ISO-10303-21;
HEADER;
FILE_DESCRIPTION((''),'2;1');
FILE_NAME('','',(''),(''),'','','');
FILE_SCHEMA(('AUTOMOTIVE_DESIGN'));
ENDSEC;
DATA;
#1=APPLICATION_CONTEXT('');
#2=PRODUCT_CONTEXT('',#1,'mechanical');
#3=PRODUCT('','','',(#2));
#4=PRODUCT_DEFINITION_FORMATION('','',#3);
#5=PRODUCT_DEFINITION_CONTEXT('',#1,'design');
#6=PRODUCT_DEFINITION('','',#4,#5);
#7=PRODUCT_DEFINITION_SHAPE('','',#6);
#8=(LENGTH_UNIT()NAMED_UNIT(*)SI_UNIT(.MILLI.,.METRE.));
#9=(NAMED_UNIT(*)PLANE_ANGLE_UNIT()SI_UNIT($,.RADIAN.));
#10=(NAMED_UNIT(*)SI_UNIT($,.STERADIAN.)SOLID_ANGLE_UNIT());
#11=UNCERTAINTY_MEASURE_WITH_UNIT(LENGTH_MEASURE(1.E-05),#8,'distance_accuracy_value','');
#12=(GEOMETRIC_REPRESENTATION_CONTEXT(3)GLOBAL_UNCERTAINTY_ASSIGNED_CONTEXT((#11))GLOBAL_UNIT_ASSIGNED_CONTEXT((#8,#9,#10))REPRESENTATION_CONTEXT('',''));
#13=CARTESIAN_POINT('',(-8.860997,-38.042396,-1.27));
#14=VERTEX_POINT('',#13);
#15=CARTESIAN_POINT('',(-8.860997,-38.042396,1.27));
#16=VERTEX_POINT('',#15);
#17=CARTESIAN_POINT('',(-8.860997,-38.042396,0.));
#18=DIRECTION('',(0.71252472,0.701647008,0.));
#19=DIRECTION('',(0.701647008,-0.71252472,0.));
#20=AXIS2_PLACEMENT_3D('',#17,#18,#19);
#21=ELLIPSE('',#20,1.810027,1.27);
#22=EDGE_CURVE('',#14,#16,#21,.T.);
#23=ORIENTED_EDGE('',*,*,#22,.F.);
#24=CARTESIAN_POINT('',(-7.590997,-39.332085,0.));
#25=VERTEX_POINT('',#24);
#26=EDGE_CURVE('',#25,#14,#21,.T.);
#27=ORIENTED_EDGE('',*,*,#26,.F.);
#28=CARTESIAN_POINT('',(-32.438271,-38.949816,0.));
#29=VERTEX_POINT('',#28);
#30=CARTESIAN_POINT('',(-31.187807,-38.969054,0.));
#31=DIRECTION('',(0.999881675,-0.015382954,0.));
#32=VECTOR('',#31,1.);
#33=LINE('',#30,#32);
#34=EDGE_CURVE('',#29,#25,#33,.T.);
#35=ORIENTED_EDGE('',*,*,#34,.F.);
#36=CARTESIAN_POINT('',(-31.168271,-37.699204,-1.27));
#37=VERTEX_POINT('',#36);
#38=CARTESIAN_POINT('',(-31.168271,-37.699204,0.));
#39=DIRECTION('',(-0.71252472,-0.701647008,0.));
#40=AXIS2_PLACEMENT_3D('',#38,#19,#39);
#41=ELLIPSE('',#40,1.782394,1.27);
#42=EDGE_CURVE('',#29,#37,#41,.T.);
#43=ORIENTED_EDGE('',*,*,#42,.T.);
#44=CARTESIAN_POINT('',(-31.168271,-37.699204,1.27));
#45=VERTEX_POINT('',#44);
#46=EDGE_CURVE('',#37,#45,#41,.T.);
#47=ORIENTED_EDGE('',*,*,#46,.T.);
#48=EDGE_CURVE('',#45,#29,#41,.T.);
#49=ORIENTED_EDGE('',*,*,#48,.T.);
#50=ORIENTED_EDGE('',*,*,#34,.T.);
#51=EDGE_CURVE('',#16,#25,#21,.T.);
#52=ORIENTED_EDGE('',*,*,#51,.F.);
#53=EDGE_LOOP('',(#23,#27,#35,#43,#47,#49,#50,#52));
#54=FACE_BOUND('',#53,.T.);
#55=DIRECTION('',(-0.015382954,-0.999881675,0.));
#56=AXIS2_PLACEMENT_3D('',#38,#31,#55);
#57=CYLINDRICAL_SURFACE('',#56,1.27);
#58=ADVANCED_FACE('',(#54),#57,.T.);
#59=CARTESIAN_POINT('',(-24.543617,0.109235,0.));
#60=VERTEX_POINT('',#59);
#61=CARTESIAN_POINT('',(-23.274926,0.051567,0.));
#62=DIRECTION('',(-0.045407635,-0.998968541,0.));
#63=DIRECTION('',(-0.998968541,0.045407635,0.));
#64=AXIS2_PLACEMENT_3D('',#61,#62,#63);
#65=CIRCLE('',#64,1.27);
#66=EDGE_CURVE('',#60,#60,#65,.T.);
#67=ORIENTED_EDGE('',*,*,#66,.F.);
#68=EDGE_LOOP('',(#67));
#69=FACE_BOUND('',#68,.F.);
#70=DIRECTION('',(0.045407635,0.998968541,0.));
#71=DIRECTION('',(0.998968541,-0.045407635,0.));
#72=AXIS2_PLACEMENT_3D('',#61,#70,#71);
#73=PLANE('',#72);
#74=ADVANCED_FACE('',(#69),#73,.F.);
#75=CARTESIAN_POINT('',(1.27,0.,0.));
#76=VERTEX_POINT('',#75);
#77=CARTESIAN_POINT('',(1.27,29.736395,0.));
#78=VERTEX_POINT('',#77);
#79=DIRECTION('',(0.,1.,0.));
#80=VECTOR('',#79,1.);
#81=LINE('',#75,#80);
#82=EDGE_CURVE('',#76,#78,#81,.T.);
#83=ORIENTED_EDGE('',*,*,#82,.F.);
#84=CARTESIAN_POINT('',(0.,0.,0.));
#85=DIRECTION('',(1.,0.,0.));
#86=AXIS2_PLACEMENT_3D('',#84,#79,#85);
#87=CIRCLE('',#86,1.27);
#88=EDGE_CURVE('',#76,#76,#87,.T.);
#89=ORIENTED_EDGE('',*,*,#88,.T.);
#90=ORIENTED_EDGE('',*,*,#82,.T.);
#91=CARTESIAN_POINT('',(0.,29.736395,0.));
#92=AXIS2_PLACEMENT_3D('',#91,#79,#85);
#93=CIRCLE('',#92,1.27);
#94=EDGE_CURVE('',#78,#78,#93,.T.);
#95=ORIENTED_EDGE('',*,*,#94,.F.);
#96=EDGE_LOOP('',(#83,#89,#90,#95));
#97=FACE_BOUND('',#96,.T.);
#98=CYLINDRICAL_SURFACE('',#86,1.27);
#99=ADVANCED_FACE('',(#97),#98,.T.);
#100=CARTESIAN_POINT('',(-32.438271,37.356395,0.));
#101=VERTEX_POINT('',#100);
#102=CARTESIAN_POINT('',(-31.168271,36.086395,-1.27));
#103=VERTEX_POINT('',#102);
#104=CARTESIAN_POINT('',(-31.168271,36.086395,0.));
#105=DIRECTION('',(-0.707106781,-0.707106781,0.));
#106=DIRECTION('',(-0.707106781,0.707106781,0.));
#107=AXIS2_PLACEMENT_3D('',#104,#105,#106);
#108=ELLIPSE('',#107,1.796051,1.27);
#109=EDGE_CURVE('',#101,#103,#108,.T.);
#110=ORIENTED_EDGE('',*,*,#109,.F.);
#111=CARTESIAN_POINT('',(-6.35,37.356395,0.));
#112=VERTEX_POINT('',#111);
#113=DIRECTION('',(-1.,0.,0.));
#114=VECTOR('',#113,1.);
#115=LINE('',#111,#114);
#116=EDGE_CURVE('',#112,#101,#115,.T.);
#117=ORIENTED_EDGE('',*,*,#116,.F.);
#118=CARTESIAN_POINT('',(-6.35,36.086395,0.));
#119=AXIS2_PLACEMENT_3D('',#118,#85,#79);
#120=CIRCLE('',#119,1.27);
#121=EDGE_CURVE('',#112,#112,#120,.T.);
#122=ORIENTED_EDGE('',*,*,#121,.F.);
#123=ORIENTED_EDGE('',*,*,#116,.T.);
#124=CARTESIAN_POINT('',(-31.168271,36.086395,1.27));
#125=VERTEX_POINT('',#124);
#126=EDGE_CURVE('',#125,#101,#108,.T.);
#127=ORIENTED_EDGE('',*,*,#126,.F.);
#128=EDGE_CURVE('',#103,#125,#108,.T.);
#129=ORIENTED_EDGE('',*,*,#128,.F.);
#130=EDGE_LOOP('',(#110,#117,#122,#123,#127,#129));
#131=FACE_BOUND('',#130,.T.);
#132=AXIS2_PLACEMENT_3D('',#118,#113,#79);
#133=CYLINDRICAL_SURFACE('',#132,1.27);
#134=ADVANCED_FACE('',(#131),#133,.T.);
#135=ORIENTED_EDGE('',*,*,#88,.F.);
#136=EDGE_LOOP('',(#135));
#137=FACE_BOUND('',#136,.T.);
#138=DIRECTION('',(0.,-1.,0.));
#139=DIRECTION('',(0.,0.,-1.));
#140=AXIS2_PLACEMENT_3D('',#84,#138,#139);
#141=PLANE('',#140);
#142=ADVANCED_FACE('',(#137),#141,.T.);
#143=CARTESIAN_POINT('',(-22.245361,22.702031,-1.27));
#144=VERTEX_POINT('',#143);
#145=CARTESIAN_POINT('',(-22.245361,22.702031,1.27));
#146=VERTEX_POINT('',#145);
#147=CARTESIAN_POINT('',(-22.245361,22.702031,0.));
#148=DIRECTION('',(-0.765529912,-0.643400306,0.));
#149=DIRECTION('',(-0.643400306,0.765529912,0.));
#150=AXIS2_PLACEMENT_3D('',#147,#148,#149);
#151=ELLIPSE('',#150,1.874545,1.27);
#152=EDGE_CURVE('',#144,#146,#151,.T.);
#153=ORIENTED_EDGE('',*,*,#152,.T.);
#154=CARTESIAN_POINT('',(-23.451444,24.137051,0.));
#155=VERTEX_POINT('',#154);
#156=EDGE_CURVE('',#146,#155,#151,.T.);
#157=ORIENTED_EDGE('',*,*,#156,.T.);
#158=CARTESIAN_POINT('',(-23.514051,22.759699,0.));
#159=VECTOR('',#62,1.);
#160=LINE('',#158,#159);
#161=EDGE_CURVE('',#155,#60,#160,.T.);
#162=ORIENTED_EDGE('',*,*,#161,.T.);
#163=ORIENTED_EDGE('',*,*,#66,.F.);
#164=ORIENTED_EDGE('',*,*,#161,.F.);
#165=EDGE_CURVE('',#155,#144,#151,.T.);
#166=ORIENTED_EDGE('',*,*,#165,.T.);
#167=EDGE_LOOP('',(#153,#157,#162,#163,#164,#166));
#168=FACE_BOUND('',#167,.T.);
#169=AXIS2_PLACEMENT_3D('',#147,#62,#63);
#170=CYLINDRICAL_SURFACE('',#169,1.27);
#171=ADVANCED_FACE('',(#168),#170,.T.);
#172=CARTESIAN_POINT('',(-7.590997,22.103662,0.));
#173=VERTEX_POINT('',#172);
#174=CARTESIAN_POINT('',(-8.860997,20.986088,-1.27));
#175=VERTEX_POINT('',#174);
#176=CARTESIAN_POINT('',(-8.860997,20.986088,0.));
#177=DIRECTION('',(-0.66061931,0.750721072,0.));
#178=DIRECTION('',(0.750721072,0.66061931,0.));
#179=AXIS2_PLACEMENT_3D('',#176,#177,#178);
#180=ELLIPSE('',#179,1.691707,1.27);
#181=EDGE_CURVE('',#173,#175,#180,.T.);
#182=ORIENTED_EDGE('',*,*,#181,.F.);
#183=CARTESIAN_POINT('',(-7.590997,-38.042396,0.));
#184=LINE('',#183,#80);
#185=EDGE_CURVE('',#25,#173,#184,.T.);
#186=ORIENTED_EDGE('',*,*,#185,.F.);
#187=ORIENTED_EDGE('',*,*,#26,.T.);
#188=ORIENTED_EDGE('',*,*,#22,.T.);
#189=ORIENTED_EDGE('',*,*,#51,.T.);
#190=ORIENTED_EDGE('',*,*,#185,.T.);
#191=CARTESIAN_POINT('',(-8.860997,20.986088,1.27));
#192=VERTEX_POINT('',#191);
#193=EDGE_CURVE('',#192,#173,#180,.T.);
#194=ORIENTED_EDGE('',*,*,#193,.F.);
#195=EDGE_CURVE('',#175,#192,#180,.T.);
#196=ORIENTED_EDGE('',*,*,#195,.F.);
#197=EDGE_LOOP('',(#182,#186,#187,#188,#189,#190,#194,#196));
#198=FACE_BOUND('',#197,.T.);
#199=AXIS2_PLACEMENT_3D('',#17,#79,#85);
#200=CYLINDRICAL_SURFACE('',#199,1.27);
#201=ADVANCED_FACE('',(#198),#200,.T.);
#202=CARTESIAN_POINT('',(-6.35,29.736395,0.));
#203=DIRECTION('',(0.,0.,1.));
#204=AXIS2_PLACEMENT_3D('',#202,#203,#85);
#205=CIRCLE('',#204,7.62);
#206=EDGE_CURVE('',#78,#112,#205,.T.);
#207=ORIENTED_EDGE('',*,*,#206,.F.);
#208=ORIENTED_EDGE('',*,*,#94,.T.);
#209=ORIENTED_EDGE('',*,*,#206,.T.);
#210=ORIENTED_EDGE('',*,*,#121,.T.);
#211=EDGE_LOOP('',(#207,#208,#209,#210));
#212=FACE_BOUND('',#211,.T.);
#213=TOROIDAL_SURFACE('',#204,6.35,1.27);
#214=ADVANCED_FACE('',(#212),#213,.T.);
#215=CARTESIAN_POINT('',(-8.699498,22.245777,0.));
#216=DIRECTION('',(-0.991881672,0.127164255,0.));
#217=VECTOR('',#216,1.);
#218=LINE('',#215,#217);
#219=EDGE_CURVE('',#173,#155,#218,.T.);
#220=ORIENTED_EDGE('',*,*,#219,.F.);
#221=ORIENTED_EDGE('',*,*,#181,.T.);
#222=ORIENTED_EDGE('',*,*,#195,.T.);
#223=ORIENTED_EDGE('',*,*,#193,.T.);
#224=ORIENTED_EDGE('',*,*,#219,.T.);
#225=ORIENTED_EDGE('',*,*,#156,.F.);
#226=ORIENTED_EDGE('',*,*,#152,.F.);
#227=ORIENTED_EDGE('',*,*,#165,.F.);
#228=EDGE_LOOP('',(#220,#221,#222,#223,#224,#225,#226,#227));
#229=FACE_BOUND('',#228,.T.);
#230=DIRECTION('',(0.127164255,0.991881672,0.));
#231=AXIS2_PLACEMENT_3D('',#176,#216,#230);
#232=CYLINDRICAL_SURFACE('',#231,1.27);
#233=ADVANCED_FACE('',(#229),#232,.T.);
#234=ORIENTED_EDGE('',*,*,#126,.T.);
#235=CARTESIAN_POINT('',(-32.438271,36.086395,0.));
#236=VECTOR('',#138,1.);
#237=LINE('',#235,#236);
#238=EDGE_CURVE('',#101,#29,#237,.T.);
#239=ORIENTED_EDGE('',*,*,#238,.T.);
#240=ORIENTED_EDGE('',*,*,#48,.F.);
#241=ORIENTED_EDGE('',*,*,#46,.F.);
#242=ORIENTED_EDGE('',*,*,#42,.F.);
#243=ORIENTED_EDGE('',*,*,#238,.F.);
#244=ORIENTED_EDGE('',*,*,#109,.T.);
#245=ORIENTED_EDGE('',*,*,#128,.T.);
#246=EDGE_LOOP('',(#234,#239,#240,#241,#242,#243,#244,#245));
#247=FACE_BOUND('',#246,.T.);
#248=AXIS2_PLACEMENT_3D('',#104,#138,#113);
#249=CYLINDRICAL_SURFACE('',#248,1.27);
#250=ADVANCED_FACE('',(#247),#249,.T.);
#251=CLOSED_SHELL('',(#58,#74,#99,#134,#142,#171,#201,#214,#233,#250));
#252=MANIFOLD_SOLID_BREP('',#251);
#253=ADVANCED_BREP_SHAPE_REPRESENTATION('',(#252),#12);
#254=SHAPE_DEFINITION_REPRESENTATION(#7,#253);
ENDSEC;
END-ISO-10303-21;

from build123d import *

# Parameters (mm, degrees)
F0_R = 1.27


with BuildPart() as f2:
    # F2: sweep along a path in F1
    with BuildLine(Plane.XY) as f2_path:
        Line((0, 0), (0, 29.7363953829))
        ThreePointArc((0, 29.7363953829), (-1.8598719395, 34.2265234434), (-6.35, 36.0863953829))
        Line((-6.35, 36.0863953829), (-31.1682708561, 36.0863953829))
        Line((-31.1682708561, 36.0863953829), (-31.1682708561, -37.6992039382))
        Line((-31.1682708561, -37.6992039382), (-8.8609969243, -38.042396307))
        Line((-8.8609969243, -38.042396307), (-8.8609969243, 20.9860876203))
        Line((-8.8609969243, 20.9860876203), (-22.2453605384, 22.7020308375))
        Line((-22.2453605384, 22.7020308375), (-23.2749264687, 0.0515673637))
    # F0 (on Front) → F2 (sweep)
    with BuildSketch(Plane.XZ):
        Circle(F0_R)
    sweep(path=f2_path.line, transition=Transition.RIGHT)


solid = f2.part
